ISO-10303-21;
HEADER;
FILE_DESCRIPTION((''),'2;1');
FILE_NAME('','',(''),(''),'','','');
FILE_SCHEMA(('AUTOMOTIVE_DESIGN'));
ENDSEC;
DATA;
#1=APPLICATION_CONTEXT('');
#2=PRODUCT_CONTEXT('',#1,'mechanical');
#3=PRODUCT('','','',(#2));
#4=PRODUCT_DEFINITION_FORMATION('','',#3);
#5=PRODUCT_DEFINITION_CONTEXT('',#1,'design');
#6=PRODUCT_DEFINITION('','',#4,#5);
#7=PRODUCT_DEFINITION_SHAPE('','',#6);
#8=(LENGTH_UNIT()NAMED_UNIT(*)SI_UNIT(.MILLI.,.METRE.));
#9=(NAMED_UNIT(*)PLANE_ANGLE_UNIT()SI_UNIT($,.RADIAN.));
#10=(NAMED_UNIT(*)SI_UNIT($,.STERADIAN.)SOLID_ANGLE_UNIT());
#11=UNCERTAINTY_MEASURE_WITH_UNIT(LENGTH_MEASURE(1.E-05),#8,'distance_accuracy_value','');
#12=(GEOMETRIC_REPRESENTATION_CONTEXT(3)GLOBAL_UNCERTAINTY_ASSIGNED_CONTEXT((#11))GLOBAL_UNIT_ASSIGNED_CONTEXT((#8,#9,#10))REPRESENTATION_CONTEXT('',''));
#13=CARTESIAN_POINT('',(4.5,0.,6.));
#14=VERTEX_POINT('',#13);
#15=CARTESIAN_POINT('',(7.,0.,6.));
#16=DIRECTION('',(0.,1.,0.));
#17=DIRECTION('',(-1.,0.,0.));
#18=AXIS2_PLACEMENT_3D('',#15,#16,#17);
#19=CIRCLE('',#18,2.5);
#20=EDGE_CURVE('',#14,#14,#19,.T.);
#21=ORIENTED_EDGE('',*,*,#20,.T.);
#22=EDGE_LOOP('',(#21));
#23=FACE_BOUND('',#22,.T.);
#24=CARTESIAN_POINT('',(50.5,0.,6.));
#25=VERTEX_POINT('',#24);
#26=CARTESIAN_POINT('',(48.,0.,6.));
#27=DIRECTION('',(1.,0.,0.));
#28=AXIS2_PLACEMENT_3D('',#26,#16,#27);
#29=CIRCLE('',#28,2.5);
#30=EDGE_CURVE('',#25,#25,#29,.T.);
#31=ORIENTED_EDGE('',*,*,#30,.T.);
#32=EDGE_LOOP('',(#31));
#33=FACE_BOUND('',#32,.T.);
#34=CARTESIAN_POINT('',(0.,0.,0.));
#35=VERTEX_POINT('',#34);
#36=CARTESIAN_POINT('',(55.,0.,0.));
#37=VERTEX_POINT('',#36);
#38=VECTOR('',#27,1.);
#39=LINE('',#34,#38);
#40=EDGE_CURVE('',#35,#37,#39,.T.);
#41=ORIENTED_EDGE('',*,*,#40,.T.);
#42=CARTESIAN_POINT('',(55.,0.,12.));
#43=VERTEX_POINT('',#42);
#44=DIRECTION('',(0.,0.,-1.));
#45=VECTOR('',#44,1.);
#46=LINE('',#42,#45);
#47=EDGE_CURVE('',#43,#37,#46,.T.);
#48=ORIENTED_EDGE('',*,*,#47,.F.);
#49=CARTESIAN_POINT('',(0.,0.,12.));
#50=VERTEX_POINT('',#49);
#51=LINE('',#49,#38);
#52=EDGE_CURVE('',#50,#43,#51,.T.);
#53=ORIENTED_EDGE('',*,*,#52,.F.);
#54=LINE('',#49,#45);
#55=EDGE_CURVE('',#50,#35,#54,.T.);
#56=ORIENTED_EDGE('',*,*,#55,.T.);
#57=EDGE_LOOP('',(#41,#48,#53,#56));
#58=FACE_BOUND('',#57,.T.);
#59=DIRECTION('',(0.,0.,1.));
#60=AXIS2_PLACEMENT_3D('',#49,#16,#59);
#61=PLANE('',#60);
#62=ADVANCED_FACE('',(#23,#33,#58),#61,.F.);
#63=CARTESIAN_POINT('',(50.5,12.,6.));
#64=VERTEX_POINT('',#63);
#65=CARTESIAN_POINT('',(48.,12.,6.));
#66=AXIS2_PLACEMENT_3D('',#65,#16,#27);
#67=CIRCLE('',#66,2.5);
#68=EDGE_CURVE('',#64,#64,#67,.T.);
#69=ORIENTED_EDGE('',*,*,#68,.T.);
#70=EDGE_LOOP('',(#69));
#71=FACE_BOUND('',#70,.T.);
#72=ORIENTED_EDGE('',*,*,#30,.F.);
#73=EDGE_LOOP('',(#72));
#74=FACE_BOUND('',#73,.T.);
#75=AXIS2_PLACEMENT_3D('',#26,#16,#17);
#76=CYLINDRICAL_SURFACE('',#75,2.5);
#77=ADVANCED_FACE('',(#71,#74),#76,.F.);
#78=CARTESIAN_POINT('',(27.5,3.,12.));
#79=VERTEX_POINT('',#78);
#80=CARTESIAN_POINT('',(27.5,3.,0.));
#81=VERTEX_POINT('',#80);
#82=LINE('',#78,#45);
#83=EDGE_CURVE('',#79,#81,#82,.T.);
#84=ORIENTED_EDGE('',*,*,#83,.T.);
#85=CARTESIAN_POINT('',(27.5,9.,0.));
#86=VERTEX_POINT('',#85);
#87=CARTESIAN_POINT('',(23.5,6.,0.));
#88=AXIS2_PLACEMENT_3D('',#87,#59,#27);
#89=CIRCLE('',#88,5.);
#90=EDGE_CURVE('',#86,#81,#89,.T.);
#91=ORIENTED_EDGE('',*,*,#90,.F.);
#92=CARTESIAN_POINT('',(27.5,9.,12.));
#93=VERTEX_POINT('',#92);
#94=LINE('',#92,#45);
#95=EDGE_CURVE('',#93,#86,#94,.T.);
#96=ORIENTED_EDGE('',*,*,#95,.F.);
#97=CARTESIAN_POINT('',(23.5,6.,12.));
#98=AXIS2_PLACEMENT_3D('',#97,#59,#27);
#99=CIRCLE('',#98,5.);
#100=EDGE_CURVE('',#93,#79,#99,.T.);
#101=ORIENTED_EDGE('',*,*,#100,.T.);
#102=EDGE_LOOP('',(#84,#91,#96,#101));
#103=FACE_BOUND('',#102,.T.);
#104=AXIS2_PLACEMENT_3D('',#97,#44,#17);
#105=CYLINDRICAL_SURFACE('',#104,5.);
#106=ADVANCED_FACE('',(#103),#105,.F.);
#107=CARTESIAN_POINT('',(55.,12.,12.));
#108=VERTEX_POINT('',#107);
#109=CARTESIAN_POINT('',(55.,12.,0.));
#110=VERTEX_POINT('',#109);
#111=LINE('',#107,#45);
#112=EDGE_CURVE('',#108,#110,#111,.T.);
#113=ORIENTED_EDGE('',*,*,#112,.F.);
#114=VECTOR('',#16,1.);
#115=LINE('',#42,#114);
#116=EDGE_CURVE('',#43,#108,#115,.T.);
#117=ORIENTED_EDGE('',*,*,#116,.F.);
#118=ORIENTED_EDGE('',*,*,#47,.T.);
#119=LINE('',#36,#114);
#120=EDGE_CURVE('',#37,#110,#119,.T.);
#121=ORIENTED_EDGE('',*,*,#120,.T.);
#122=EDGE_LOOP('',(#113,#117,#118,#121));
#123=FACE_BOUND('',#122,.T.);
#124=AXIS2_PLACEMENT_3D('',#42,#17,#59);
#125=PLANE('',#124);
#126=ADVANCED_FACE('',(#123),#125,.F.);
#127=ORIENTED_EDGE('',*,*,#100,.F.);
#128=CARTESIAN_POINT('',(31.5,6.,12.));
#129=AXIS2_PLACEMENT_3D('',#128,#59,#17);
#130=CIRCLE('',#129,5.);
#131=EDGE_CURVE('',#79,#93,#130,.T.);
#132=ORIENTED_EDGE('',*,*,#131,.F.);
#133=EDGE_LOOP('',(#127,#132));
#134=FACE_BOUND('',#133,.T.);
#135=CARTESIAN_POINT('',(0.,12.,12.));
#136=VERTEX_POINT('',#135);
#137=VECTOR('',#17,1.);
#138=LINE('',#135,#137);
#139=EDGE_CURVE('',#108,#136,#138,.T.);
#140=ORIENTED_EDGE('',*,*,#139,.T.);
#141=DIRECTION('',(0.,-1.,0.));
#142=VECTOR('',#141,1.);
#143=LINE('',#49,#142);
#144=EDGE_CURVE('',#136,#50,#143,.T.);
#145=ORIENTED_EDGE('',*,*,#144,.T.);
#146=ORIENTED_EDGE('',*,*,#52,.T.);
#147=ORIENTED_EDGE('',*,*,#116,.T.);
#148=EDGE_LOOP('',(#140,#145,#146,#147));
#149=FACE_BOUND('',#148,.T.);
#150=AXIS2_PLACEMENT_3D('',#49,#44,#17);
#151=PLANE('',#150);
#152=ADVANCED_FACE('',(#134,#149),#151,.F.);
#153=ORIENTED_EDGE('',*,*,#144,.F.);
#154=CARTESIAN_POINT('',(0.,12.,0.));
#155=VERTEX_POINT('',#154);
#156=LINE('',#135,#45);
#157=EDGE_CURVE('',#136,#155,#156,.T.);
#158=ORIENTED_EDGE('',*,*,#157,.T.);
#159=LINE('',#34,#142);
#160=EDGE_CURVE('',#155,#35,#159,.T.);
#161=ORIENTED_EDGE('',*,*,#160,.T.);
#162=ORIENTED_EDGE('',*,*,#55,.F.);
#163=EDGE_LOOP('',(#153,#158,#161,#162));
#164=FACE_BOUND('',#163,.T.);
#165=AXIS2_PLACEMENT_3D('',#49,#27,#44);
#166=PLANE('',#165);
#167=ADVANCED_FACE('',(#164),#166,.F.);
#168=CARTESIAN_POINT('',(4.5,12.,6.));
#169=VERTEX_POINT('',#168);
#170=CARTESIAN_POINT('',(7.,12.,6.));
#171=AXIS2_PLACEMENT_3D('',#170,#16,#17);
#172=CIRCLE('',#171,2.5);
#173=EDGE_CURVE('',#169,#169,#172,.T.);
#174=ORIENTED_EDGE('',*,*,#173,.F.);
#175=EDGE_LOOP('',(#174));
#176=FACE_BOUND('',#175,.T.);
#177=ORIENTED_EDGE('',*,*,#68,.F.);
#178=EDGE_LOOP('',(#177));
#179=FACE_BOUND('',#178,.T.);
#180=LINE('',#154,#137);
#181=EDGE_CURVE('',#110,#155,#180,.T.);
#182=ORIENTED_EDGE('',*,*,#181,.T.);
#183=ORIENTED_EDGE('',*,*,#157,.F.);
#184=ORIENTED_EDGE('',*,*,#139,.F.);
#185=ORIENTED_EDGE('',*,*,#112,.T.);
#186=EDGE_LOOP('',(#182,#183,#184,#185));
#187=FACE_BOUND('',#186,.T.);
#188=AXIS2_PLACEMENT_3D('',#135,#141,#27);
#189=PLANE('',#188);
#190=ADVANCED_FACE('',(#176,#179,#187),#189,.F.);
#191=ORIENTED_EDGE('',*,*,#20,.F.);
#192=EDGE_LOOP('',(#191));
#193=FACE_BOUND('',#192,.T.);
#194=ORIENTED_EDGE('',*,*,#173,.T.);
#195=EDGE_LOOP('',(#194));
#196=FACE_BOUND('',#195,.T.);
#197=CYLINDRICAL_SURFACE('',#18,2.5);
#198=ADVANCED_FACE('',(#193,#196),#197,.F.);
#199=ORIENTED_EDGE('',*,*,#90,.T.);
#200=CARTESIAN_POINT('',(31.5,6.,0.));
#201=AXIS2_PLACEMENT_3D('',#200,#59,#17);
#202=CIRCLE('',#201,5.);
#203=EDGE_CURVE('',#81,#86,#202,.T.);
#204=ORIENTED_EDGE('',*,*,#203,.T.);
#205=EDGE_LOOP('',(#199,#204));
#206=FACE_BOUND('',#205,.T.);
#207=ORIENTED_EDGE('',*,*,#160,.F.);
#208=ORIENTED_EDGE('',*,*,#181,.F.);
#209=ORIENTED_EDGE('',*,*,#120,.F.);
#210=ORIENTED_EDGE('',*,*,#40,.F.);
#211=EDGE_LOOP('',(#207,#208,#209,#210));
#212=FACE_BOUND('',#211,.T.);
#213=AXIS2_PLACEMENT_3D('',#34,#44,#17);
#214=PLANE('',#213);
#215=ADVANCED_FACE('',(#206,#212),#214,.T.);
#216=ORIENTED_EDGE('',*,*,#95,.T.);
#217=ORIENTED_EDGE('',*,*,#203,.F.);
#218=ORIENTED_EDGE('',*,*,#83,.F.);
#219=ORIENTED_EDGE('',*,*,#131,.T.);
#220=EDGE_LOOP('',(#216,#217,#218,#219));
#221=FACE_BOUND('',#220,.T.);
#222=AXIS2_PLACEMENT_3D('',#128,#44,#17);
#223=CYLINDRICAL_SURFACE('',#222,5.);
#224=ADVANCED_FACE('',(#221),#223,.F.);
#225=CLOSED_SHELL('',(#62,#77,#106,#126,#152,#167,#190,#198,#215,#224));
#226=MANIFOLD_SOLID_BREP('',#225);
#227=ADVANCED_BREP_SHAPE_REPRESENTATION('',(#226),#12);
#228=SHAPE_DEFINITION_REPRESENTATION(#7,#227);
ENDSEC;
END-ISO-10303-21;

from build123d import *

# Parameters (mm, degrees)
CROQUIS1_W              = 55
CROQUIS1_H              = 12
SALIENTE_EXTRUIR1_DEPTH = 12
TALADRO1_OUTLINE_R      = 2.5
TALADRO1_DEPTH          = 12


# Read off the part's stored shape, not the designer's step: Taladro1
with BuildPart() as part:
    # Croquis1 → Saliente-Extruir1 (new body)
    with BuildSketch(Plane.XY):
        with Locations((27.5, 6)):
            Rectangle(CROQUIS1_W, CROQUIS1_H)
        with BuildLine():
            ThreePointArc((27.5, 9), (18.5, 6), (27.5, 3))
            ThreePointArc((27.5, 3), (36.5, 6), (27.5, 9))
        make_face(mode=Mode.SUBTRACT)
    extrude(amount=SALIENTE_EXTRUIR1_DEPTH)

    # Taladro1 outline → Taladro1 (cut)
    with BuildSketch(Plane(origin=(0, 0, 0), x_dir=(1, 0, 0), z_dir=(0, 1, 0))):
        with Locations((48, -6)):
            Circle(TALADRO1_OUTLINE_R)
        with Locations((7, -6)):
            Circle(TALADRO1_OUTLINE_R)
    extrude(amount=TALADRO1_DEPTH, mode=Mode.SUBTRACT)


solid = part.part
